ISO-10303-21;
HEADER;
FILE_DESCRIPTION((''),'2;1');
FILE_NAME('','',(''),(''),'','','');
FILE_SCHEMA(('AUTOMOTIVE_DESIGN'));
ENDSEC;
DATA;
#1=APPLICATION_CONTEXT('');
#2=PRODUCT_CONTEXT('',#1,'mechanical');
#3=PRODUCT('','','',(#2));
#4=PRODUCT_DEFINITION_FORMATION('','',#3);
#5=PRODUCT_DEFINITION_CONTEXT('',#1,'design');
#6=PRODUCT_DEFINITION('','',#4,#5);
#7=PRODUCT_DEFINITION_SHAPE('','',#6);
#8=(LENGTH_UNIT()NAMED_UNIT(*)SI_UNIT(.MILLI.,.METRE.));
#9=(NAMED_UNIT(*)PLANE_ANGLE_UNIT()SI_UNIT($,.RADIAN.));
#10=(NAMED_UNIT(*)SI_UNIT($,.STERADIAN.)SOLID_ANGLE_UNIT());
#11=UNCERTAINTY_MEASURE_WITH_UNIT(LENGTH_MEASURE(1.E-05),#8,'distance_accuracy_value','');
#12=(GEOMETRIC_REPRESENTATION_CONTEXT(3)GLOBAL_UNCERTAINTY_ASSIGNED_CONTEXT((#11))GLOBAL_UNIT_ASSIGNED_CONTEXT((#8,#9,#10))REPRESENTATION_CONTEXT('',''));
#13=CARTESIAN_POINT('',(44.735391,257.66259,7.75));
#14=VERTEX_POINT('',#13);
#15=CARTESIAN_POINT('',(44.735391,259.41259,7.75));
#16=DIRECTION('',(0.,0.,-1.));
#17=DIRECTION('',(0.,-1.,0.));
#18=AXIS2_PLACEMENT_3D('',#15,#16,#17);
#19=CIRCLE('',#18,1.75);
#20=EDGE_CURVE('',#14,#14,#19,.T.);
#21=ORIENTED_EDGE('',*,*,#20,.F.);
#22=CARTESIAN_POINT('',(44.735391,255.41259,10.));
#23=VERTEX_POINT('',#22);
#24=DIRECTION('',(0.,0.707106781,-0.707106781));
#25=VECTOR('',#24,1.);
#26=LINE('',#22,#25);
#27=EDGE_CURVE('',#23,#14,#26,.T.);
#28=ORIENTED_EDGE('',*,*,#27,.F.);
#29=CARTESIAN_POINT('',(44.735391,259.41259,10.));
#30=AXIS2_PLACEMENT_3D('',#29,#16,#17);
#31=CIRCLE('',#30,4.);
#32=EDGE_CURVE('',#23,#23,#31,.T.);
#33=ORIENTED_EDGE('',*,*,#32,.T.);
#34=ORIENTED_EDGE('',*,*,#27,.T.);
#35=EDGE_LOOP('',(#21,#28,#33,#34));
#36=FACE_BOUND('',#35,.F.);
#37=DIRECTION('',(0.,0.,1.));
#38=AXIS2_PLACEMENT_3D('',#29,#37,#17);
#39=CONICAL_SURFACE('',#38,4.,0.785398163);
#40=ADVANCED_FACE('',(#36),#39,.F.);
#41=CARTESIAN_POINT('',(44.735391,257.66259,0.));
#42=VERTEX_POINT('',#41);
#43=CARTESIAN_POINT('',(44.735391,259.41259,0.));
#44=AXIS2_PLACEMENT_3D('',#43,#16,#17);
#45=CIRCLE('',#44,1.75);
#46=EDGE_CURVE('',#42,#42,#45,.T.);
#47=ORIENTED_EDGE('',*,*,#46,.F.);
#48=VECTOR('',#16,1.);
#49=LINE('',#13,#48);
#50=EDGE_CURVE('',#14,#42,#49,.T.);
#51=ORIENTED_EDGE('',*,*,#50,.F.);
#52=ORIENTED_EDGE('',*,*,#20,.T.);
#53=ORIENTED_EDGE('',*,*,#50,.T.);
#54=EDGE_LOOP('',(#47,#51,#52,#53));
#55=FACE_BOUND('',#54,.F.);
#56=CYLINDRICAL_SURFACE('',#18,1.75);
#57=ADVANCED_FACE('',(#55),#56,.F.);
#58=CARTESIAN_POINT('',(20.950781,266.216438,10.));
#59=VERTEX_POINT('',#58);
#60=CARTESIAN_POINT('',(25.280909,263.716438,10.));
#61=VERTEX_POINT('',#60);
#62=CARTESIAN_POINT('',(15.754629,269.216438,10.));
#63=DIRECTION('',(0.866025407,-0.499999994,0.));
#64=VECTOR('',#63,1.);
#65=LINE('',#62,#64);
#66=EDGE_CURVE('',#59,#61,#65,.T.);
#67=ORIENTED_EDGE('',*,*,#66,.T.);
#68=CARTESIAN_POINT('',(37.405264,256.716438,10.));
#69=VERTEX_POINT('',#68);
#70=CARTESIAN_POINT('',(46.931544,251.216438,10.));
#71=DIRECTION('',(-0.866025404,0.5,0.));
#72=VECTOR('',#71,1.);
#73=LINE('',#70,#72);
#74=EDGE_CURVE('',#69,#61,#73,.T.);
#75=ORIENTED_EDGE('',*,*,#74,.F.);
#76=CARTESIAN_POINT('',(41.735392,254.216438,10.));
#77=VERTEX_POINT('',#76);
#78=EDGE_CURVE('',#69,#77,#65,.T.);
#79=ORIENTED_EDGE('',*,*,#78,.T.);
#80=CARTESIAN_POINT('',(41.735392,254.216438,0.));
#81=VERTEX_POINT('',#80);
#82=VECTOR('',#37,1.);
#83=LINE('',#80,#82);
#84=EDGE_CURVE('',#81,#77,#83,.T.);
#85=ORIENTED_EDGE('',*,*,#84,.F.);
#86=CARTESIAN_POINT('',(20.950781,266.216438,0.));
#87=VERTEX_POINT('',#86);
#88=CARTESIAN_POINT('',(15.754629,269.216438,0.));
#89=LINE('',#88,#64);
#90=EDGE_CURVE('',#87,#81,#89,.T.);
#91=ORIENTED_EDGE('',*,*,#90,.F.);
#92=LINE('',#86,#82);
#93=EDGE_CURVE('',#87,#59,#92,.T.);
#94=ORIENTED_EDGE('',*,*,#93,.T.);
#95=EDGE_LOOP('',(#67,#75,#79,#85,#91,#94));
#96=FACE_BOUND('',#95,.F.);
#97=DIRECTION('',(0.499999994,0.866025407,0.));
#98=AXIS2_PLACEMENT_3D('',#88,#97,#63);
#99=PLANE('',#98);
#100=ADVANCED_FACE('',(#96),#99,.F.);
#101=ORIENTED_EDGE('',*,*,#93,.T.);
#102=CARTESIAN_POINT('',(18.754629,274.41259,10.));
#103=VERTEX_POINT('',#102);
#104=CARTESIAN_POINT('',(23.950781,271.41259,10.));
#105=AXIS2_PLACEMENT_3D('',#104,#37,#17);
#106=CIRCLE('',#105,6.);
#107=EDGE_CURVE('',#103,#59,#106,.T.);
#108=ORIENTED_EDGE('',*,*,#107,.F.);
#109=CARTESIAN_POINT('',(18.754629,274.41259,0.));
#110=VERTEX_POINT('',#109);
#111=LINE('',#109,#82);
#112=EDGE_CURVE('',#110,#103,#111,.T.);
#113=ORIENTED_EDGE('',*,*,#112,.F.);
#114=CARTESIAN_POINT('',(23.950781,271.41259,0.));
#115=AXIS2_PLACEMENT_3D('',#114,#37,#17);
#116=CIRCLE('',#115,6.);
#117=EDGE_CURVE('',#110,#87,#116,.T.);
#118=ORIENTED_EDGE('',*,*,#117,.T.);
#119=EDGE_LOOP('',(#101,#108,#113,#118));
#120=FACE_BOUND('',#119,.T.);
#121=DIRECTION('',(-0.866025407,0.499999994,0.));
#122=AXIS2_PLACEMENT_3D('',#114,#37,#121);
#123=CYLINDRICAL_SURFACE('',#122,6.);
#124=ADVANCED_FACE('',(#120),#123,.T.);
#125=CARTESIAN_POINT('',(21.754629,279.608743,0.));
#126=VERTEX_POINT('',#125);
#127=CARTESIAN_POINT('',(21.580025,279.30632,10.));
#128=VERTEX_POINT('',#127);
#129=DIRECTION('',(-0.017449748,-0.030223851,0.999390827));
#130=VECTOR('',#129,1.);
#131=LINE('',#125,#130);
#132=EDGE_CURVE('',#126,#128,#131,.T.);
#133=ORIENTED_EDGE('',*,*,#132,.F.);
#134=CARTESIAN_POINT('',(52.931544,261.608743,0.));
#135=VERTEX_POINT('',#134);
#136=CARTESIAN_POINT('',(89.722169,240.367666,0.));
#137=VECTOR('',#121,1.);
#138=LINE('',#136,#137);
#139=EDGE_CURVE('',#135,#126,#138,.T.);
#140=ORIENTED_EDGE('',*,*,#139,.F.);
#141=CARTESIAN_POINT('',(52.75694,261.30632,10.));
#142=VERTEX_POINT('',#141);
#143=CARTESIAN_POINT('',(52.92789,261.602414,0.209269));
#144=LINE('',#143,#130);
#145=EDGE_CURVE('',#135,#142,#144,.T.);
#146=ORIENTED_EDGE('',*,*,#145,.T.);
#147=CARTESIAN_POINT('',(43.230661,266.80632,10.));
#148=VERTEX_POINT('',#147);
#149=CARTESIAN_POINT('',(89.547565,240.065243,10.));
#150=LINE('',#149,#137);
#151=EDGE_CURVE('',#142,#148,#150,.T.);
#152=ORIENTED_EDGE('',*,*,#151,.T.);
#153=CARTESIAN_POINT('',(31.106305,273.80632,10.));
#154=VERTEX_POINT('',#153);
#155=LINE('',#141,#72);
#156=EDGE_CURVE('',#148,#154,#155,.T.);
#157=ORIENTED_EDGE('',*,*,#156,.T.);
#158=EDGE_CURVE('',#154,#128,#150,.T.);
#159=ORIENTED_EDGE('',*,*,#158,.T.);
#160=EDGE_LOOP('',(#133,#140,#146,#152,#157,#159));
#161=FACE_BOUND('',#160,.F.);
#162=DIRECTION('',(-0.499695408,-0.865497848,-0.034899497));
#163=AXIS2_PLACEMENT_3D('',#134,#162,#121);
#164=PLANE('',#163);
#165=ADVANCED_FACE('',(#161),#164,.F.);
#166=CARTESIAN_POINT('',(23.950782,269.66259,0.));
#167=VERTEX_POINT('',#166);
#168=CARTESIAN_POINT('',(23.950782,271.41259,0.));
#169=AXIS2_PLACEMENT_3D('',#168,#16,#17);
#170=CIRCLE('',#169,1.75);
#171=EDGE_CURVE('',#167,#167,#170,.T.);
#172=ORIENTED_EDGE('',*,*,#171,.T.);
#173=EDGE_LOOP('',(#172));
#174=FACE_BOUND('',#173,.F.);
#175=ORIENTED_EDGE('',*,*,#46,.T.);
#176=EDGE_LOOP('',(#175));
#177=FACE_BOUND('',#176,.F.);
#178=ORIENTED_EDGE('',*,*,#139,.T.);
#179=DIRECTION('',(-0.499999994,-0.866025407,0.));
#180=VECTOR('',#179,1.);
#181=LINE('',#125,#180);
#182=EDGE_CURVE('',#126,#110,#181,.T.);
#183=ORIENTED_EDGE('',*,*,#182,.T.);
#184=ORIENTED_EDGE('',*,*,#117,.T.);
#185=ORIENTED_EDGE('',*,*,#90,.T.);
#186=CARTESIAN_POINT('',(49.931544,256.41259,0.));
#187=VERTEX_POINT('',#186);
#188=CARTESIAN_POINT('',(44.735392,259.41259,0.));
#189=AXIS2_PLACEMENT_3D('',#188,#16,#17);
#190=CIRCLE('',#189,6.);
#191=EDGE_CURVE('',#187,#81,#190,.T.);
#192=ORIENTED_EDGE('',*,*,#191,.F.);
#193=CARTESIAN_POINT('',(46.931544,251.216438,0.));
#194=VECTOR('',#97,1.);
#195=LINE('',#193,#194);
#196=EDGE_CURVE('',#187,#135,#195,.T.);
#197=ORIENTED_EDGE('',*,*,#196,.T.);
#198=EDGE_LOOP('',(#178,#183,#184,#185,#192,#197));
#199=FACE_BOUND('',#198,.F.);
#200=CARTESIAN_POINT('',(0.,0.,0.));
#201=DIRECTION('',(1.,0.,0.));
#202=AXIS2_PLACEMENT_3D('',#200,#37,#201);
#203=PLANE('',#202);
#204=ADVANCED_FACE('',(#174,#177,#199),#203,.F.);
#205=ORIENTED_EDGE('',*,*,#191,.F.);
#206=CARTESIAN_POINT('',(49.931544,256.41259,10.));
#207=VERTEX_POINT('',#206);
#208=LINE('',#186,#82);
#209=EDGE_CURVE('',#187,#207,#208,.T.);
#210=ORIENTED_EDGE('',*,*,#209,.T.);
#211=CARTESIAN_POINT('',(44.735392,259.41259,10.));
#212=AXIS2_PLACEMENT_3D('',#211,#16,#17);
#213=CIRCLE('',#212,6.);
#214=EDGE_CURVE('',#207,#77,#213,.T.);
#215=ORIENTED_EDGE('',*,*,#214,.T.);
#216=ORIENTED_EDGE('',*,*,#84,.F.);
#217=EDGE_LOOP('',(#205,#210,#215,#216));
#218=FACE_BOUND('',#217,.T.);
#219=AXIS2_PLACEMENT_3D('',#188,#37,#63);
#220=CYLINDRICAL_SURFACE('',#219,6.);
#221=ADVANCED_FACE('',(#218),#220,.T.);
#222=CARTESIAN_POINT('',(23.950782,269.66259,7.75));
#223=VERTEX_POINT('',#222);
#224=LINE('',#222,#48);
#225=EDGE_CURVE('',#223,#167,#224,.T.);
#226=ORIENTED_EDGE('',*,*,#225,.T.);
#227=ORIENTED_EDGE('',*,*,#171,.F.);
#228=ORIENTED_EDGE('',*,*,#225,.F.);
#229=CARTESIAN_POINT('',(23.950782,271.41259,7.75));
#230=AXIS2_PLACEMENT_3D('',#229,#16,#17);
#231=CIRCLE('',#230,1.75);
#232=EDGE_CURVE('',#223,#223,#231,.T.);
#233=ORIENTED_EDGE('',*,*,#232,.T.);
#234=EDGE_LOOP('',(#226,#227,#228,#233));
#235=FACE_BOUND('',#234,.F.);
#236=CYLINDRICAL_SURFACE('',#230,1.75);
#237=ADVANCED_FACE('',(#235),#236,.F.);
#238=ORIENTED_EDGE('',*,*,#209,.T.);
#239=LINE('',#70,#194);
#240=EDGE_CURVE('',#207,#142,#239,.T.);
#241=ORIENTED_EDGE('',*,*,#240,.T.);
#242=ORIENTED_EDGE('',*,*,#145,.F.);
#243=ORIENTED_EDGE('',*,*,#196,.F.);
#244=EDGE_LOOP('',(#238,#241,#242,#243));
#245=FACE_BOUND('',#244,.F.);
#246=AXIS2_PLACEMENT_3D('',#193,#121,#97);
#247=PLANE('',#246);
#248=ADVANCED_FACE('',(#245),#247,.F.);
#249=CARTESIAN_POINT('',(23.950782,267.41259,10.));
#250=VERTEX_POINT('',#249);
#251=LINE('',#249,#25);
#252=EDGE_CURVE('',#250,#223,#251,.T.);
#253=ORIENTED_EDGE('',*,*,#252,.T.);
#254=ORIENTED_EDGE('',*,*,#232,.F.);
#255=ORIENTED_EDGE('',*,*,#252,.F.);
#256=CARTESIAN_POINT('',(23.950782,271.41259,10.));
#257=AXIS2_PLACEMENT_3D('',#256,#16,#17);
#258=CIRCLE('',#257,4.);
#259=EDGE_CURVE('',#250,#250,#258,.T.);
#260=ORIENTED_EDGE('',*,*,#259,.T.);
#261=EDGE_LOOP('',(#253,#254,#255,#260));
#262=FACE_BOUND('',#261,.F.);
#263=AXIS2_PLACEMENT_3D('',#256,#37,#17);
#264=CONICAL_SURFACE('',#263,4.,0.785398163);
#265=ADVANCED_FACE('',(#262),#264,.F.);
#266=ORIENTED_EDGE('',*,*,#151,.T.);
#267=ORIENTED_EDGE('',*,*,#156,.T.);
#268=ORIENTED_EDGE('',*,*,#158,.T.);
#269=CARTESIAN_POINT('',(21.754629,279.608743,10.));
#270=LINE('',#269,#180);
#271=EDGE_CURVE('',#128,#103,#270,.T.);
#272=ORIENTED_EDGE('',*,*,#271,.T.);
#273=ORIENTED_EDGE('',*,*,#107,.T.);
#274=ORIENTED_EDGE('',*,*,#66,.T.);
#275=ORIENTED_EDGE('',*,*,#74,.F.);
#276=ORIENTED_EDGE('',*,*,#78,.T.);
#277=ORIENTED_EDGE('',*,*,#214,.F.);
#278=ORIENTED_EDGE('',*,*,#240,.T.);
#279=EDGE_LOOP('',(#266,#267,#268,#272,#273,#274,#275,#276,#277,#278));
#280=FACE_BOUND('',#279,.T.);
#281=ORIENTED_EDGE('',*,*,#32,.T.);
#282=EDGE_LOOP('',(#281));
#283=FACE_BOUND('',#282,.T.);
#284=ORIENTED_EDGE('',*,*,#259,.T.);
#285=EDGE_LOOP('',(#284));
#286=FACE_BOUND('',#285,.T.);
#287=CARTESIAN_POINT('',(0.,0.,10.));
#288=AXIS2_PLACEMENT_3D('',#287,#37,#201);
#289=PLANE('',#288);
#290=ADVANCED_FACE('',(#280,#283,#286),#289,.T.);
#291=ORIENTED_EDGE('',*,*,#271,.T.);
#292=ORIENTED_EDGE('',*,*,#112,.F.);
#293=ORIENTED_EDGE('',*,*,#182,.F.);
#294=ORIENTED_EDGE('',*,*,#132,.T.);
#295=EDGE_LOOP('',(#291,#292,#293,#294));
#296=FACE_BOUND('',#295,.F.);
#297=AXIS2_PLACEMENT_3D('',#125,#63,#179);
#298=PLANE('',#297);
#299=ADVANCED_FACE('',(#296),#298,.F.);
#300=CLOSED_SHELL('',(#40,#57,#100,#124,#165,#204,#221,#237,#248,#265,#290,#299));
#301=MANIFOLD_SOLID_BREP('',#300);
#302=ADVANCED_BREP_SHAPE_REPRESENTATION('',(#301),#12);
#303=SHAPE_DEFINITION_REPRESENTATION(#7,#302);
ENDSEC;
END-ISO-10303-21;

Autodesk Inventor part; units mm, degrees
ref_plane "YZ Plane" through (0, 0, 0) normal (1, 0, 0) x (0, 1, 0)
ref_plane "XZ Plane" through (0, 0, 0) normal (0, 1, 0) x (-1, 0, 0)
ref_plane "XY Plane" through (0, 0, 0) normal (0, 0, 1) x (1, 0, 0)
ref_plane "Work Plane1" through (0, 0, 0) normal (0, 0, 1) x (1, 0, 0)
sketch "Sketch1" plane through (0, 0, 0) normal (0, 0, 1) x (1, 0, 0)
  line L0 (39.878985, 283.001047) -> (46.807188, 279.001047)
  line L1 (118.687297, 237.501047) -> (-32.001123, 324.501047)
  line L2 (118.687297, 237.501047) -> (112.687297, 227.108743)
  line L3 (-38.001123, 314.108743) -> (112.687297, 227.108743)
  line L4 (-32.001123, 324.501047) -> (-38.001123, 314.108743)
  line L5 (40.807188, 268.608743) -> (46.807188, 279.001047)
  line L6 (33.878985, 272.608743) -> (39.878985, 283.001047)
  line L7 (40.807188, 268.608743) -> (33.878985, 272.608743)
  circle A0 centre (68.259454, 214.654052) radius 27.5 construction
  line L8 (52.931544, 261.608743) -> (21.754629, 279.608743)
  line L9 (21.754629, 279.608743) -> (15.754629, 269.216438)
  line L10 (15.754629, 269.216438) -> (46.931544, 251.216438)
  line L11 (46.931544, 251.216438) -> (52.931544, 261.608743)
  point P0 (0, 0)
  dimension "d0" = 55
  dimension "d1" = 12
  dimension "d2" = 14
  dimension "d3" = 14
sketch "Sketch1 outline for Extrusion1" plane through (0, 0, 0) normal (0, 0, 1) x (1, 0, 0)
  line L0 (15.754629, 269.216438) -> (46.931544, 251.216438)
  line L1 (21.754629, 279.608743) -> (15.754629, 269.216438)
  line L2 (52.931544, 261.608743) -> (21.754629, 279.608743)
  line L3 (46.931544, 251.216438) -> (52.931544, 261.608743)
extrude "Extrusion1" add sketch "Sketch1 outline for Extrusion1" along normal blind 10
fillet "Fillet1" radius 6 2 edges at (15.7546, 269.2164, 5) (46.9315, 251.2164, 5)
sketch "Sketch2" plane through (0, 0, 10) normal (0, 0, 1) x (1, 0, 0)
  arc A0 (18.754629, 274.41259) -> (20.950782, 266.216438) centre (23.950782, 271.41259) ccw
  arc A1 (41.735391, 254.216438) -> (49.931544, 256.41259) centre (44.735391, 259.41259) ccw
  point P0 (0, 0)
hole "Hole1" at (23.950782, 271.41259, 10) at (44.735391, 259.41259, 10) direction (0, 0, -1) diameter 3.5 end through all countersink diameter 8 countersink angle 90
sketch "Sketch3" plane through (0, 0, 10) normal (0, 0, 1) x (1, 0, 0)
  line L0 (52.931544, 261.608743) -> (21.754629, 279.608743)
  line L1 (42.539239, 267.608743) -> (32.146934, 273.608743)
  line L2 (32.146934, 273.608743) -> (26.146934, 263.216438)
  line L3 (26.146934, 263.216438) -> (36.539239, 257.216438)
  line L4 (36.539239, 257.216438) -> (42.539239, 267.608743)
  line L5 (21.754629, 279.608743) -> (18.754629, 274.41259)
  line L6 (49.931544, 256.41259) -> (52.931544, 261.608743)
  point P0 (0, 0)
  dimension "d14" = 12
  dimension "d15" = 12
  dimension "d16" = 12
sketch "Sketch3 outline for Extrusion2" plane through (0, 0, 10) normal (0, 0, 1) x (1, 0, 0)
  line L0 (26.146934, 263.216438) -> (36.539239, 257.216438)
  line L1 (32.146934, 273.608743) -> (26.146934, 263.216438)
  line L2 (42.539239, 267.608743) -> (32.146934, 273.608743)
  line L3 (36.539239, 257.216438) -> (42.539239, 267.608743)
extrude "Extrusion2" add sketch "Sketch3 outline for Extrusion2" along normal blind 47
sketch "Sketch4" plane through (21.754629, 279.608743, 10) normal (0.5, 0.8660254, 0) x (0.8660254, -0.5, 0)
  circle A0 centre (18, -41) radius 4 projected
  point P0 (120.96431, 10)
sketch "Sketch4 outline for Extrusion3" plane through (21.754629, 279.608743, 10) normal (0.5, 0.8660254, 0) x (0.8660254, -0.5, 0)
  circle A0 centre (18, -41) radius 4
extrude "Extrusion3" cut sketch "Sketch4 outline for Extrusion3" against normal through all
fillet "Fillet2" radius 6 2 edges at (39.5392, 262.4126, 57) (29.1469, 268.4126, 57)
fillet "Fillet3" radius 1 2 edges at (29.1469, 268.4126, 10) (39.5392, 262.4126, 10)
draft "FaceDraft1" angle 2 pull direction (0, 0, 1) faces at (37.48227, 270.528385, 23.009722) fixed edges at (37.343087, 270.608743, 0)
sketch "Sketch6" plane through (49.931544, 256.41259, 10) normal (0.8660254, -0.5, 0) x (0, 0, -1)
  line L0 (0, 0) -> (0, -6)
  line L1 (0, -6) -> (10, -6)
  line L2 (10, -6) -> (10, 0)
  line L3 (10, 0) -> (0, 0)
  line L4 (10, 0) -> (0, 0)
  line L5 (10, 0) -> (10, 6)
  line L6 (10, 6) -> (0, 5.650792)
  line L7 (0, 0) -> (0, 5.650792)
  line L8 (-1, -6) -> (0, -6)
  line L9 (0, -6) -> (-53.172101, -6)
  line L10 (-53.172101, -6) -> (-53.172101, 15.66156)
  line L11 (-53.172101, 15.66156) -> (0, 15.66156)
  line L12 (0, 15.66156) -> (0, -6)
  point P0 (10, -247.025589)
  point P1 (0, 5.650792)
sketch "Sketch6 outline for Extrusion4" plane through (49.931544, 256.41259, 10) normal (0.8660254, -0.5, 0) x (0, 0, -1)
  line L0 (0, 15.66156) -> (-53.172101, 15.66156)
  line L1 (0, 5.650792) -> (0, 15.66156)
  line L2 (0, 0) -> (0, 5.650792)
  line L3 (0, -6) -> (0, 0)
  line L4 (-1, -6) -> (0, -6)
  line L5 (-53.172101, -6) -> (-1, -6)
  line L6 (-53.172101, 15.66156) -> (-53.172101, -6)
extrude "Extrusion4" cut sketch "Sketch6 outline for Extrusion4" against normal through all
equation "\"d2\" = d3"
equation "\"d15\" = d16"
properties part number "backcover_clamp_mini"
